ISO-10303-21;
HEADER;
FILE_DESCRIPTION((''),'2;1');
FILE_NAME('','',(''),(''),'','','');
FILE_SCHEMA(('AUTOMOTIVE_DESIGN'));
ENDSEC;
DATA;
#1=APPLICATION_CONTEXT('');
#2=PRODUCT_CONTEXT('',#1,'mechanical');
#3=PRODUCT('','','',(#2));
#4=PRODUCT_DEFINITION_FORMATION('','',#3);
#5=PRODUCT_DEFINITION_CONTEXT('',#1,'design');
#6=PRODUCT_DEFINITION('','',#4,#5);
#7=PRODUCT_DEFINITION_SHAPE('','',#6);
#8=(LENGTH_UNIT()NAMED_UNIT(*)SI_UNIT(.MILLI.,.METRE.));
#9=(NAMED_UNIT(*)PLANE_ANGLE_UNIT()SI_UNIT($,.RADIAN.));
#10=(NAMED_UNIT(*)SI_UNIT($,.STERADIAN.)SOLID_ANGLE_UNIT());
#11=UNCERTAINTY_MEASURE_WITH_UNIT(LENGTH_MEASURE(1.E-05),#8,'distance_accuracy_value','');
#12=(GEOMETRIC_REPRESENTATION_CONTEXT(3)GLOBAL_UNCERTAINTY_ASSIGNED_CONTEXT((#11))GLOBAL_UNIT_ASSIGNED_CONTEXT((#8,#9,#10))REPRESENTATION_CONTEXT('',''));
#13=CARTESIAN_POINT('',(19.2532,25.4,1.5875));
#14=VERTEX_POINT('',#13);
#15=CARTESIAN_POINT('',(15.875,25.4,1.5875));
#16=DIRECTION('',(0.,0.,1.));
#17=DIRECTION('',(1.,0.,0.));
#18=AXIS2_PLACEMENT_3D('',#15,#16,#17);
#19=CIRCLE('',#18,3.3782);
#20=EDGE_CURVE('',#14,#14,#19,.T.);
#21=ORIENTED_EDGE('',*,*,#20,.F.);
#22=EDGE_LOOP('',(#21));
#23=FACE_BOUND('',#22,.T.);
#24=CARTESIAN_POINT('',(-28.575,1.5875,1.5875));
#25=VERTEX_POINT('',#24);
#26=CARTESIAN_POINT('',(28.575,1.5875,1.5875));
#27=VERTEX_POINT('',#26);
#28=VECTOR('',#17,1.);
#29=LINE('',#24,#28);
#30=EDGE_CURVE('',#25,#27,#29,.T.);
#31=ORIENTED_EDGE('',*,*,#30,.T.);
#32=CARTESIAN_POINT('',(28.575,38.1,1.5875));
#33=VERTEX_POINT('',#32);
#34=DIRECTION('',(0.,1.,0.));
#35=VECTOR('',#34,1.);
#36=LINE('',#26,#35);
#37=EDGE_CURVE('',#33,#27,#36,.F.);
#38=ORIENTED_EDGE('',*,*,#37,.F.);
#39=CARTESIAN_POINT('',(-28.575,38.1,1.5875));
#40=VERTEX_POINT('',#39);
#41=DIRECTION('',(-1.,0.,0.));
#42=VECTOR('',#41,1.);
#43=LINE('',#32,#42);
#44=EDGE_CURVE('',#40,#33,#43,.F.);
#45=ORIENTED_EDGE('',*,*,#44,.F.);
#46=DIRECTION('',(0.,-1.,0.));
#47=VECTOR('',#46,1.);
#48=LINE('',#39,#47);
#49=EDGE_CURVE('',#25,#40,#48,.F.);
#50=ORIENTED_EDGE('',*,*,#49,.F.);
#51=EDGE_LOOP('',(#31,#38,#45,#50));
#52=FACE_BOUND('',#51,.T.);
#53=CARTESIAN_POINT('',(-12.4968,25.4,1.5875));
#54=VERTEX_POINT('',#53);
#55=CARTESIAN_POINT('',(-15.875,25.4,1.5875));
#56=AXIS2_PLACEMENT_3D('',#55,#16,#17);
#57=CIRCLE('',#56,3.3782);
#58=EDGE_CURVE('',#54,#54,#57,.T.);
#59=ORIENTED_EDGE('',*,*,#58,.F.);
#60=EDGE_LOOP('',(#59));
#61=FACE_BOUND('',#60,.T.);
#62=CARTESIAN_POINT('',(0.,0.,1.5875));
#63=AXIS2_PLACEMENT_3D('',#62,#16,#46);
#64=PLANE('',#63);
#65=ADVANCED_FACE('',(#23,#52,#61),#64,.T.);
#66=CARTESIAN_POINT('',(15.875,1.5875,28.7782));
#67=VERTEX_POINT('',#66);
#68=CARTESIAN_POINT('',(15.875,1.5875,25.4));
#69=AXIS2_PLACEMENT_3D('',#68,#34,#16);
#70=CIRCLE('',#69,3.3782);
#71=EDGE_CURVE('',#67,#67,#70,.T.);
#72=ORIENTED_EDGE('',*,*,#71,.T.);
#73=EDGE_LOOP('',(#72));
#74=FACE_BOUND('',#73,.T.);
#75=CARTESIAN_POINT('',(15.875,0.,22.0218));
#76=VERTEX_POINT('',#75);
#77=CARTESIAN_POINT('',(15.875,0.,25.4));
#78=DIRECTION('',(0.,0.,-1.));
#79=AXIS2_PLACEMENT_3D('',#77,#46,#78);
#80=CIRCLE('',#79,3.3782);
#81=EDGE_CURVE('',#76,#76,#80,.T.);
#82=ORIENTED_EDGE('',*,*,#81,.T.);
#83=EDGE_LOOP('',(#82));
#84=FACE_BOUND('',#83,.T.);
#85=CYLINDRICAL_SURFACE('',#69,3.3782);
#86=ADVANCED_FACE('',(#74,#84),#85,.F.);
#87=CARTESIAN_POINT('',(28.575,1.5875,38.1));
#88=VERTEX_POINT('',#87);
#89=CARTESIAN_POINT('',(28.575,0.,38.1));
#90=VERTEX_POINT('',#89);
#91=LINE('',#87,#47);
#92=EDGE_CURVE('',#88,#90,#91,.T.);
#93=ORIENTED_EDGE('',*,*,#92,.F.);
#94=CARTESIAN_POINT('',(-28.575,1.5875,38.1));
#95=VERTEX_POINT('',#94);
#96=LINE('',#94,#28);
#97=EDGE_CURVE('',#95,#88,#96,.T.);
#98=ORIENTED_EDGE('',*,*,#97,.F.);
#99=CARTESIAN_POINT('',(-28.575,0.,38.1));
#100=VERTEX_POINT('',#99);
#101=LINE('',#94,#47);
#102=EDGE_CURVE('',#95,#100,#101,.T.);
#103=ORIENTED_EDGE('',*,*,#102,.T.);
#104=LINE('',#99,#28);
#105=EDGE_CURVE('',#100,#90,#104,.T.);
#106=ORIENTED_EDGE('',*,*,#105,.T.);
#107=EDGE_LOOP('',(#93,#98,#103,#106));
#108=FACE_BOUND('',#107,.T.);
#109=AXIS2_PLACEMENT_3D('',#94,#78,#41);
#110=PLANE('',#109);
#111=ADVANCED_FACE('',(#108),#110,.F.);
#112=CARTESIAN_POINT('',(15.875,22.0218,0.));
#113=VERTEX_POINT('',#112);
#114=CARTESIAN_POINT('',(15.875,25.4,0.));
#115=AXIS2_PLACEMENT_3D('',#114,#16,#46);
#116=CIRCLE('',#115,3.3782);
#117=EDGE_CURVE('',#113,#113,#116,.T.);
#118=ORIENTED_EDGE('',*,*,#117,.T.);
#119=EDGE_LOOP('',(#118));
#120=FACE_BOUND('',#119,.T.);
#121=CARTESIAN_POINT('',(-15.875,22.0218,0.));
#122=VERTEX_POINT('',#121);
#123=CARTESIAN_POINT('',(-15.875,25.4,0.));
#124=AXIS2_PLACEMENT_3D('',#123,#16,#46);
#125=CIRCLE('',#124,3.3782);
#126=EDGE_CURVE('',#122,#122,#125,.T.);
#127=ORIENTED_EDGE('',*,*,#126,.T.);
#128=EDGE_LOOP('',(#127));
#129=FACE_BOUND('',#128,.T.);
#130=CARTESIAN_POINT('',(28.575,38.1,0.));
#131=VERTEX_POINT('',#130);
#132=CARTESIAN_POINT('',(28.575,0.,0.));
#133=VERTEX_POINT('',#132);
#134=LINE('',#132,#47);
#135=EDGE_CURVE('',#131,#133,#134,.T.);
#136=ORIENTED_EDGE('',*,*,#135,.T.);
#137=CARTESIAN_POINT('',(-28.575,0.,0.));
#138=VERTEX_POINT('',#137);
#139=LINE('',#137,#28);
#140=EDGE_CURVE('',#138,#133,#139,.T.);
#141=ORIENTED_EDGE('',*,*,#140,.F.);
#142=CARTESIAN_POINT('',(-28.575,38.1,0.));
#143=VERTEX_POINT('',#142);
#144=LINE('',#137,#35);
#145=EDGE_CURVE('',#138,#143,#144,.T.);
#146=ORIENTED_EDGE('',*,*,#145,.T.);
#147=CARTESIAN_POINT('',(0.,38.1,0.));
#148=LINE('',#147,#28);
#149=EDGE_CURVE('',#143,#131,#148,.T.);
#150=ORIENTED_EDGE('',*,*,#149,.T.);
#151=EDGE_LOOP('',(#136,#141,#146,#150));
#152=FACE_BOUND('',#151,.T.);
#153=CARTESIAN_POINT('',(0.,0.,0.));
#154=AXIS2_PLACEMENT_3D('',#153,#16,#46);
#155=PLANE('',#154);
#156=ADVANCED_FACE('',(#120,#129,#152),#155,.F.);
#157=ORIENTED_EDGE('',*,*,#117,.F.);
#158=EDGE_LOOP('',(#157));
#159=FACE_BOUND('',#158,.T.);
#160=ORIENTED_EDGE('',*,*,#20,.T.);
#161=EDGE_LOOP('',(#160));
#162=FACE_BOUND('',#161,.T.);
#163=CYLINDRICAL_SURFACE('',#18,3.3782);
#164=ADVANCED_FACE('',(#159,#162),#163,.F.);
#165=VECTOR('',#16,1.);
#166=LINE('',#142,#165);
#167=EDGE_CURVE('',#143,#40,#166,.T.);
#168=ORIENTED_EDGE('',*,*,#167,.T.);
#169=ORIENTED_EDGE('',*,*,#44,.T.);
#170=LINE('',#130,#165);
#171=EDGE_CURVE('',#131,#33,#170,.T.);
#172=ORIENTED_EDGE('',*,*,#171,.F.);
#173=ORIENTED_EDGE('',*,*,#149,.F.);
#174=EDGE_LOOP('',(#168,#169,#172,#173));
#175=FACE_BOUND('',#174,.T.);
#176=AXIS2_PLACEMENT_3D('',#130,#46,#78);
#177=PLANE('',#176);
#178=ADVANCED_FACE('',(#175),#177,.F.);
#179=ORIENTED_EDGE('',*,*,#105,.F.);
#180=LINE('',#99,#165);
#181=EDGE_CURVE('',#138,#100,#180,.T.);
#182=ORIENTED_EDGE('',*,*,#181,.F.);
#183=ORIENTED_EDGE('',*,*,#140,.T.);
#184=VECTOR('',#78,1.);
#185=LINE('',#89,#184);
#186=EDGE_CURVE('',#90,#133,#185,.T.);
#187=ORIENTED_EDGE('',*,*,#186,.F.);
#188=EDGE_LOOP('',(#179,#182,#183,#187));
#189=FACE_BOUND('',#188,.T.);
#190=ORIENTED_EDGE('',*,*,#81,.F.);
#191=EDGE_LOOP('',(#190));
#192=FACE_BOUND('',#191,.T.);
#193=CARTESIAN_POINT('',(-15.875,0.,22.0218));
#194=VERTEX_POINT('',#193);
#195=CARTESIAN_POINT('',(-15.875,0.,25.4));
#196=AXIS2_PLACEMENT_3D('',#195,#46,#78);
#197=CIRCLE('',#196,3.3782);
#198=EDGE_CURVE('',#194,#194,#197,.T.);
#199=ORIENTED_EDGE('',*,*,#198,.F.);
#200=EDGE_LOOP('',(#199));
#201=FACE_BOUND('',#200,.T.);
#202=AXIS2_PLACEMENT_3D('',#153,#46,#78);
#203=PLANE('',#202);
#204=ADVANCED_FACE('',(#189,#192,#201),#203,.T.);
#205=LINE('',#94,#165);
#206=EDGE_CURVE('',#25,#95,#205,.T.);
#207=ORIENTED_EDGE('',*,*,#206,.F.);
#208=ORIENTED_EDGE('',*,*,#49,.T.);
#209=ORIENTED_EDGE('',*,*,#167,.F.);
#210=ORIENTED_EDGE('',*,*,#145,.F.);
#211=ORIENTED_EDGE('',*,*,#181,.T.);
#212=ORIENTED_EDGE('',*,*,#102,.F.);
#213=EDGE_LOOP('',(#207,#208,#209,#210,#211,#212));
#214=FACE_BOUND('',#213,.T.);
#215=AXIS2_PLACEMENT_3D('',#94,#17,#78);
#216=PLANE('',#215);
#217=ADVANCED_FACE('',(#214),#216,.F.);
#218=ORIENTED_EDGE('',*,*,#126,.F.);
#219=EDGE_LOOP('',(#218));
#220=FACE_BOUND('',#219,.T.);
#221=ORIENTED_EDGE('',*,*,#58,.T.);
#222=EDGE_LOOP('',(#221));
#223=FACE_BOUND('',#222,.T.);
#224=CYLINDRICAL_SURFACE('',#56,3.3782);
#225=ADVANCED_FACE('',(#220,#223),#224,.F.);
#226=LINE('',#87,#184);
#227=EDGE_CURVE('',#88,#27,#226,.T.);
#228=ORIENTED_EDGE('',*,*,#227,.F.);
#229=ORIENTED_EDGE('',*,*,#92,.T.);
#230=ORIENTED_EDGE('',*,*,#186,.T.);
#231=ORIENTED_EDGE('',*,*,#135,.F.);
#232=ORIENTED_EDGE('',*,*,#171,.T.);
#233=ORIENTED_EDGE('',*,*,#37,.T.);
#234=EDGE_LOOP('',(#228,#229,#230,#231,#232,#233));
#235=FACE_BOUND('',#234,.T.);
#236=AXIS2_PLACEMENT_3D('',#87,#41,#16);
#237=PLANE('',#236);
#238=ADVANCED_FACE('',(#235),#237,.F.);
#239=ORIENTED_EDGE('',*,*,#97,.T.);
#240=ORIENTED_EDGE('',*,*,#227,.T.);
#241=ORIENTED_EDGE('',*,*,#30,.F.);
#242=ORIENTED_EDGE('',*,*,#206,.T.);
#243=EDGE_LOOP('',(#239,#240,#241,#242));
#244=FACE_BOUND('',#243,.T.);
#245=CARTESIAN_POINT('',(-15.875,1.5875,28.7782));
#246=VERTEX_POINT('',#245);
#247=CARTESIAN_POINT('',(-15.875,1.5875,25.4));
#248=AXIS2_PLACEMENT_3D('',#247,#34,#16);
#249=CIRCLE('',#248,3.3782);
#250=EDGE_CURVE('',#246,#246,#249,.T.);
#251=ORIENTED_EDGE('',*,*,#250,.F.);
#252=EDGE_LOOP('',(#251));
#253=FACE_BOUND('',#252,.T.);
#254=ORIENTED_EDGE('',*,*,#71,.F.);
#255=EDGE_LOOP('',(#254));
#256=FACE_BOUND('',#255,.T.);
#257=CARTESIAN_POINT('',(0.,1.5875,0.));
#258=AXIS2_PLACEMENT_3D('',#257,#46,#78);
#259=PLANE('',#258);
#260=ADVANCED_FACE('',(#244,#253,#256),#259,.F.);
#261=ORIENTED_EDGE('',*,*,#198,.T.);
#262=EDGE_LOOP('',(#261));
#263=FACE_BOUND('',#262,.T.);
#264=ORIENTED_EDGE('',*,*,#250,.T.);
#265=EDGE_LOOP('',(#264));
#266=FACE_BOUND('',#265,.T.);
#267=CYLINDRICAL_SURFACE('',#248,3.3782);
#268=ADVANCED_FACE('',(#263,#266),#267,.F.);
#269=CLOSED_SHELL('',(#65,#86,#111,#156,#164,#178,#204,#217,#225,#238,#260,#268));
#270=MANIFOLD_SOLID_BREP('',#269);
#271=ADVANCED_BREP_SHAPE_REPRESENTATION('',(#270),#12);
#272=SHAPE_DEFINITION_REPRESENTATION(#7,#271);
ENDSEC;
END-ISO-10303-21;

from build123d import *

# Parameters (mm, degrees)
SKETCH1_W                    = 57.15
SKETCH1_H                    = 38.1
BASE_FLANGE1_DEPTH           = 1.5875
EDGE_FLANGE1_STRIP_W         = 7.9375
EDGE_FLANGE1_STRIP_H         = 1.5875
EDGE_FLANGE1_STRIP_CUT_DEPTH = 57.15
EDGE_FLANGE1_DEPTH           = 57.15
F_1_4_CLEARANCE_HOLE1_D      = 6.7564
F_1_4_CLEARANCE_HOLE2_D      = 6.7564
BOSS_EXTRUDE1_DEPTH          = 57.15
CUT_EXTRUDE1_DEPTH           = 79.545162168
BOSS_EXTRUDE2_DEPTH          = 3.175
BOSS_EXTRUDE3_DEPTH          = 3.175


# Sheet-metal steps are written as plain solids
with BuildPart() as part:
    # Sketch1 → Base-Flange1 (new body)
    with BuildSketch(Plane(origin=(0, 0, 0), x_dir=(1, 0, 0), z_dir=(0, 1, 0))):
        with Locations((0, -19.05)):
            Rectangle(SKETCH1_W, SKETCH1_H)
    extrude(amount=BASE_FLANGE1_DEPTH)

    # Edge-Flange1 strip (across the edge) → Edge-Flange1 strip cut (cut)
    with BuildSketch(Plane(origin=(28.575, 1.5875, 0), x_dir=(0, 0, 1), z_dir=(-1, 0, 0))):
        with Locations((-1.5875, -0.79375)):
            Rectangle(EDGE_FLANGE1_STRIP_W, EDGE_FLANGE1_STRIP_H)
    extrude(amount=EDGE_FLANGE1_STRIP_CUT_DEPTH, mode=Mode.SUBTRACT)

    # Edge-Flange1 section (across the edge) → Edge-Flange1 (add)
    with BuildSketch(Plane(origin=(28.575, 1.5875, 0), x_dir=(0, 0, 1), z_dir=(-1, 0, 0))):
        with BuildLine():
            Line((0, 0.79375), (0, 36.5125))
            Line((0, 36.5125), (1.5875, 36.5125))
            Line((1.5875, 36.5125), (1.5875, 0.79375))
            ThreePointArc((1.5875, 0.79375), (1.819983992, 0.232483992), (2.38125, 0))
            Line((2.38125, 0), (2.38125, -1.5875))
            ThreePointArc((2.38125, -1.5875), (0.697451977, -0.890048023), (0, 0.79375))
        make_face()
    extrude(amount=EDGE_FLANGE1_DEPTH)

    # 1/4 Clearance Hole1 (through all)
    with Locations(Plane(origin=(0, 1.5875, 0), x_dir=(1, 0, 0), z_dir=(0, 1, 0))):
        with Locations((-15.875, -25.4), (15.875, -25.4)):
            Hole(F_1_4_CLEARANCE_HOLE1_D / 2)

    # 1/4 Clearance Hole2 (through all)
    with Locations(Plane.XY.offset(1.5875)):
        with Locations((-15.875, 25.4), (15.875, 25.4)):
            Hole(F_1_4_CLEARANCE_HOLE2_D / 2)

    # Sketch16 → Boss-Extrude1 (add, through all)
    with BuildSketch(Plane(origin=(28.575, 0, 0), x_dir=(0, 0, -1), z_dir=(1, 0, 0))):
        with BuildLine():
            Line((0, 2.38125), (0, 0))
            Line((0, 0), (-2.38125, 0))
            ThreePointArc((-2.38125, 0), (-0.697451977, 0.697451977), (0, 2.38125))
        make_face()
    extrude(amount=-BOSS_EXTRUDE1_DEPTH)

    # Sketch18 → Cut-Extrude1 (cut, through all)
    with BuildSketch(Plane(origin=(28.575, 0, 0), x_dir=(0, 0, -1), z_dir=(1, 0, 0))):
        with BuildLine():
            Line((-2.38125, 1.5875), (-1.5875, 1.5875))
            Line((-1.5875, 1.5875), (-1.5875, 2.38125))
            ThreePointArc((-1.5875, 2.38125), (-1.819983992, 1.819983992), (-2.38125, 1.5875))
        make_face()
    extrude(amount=-CUT_EXTRUDE1_DEPTH, mode=Mode.SUBTRACT)

    # Sketch21 → Boss-Extrude2 (add)
    with BuildSketch(Plane(origin=(28.575, 0, 0), x_dir=(0, 0, -1), z_dir=(1, 0, 0))):
        Polygon((-1.5875, 1.5875), (-38.1, 1.5875), (-38.1, 0), (0, 0), (0, 38.1), (-1.5875, 38.1), align=None)
    extrude(amount=-BOSS_EXTRUDE2_DEPTH)

    # Sketch22 → Boss-Extrude3 (add)
    with BuildSketch(Plane.ZY.offset(28.575)):
        Polygon((38.1, 1.5875), (1.5875, 1.5875), (1.5875, 38.1), (0, 38.1), (0, 0), (38.1, 0), align=None)
    extrude(amount=-BOSS_EXTRUDE3_DEPTH)


solid = part.part
